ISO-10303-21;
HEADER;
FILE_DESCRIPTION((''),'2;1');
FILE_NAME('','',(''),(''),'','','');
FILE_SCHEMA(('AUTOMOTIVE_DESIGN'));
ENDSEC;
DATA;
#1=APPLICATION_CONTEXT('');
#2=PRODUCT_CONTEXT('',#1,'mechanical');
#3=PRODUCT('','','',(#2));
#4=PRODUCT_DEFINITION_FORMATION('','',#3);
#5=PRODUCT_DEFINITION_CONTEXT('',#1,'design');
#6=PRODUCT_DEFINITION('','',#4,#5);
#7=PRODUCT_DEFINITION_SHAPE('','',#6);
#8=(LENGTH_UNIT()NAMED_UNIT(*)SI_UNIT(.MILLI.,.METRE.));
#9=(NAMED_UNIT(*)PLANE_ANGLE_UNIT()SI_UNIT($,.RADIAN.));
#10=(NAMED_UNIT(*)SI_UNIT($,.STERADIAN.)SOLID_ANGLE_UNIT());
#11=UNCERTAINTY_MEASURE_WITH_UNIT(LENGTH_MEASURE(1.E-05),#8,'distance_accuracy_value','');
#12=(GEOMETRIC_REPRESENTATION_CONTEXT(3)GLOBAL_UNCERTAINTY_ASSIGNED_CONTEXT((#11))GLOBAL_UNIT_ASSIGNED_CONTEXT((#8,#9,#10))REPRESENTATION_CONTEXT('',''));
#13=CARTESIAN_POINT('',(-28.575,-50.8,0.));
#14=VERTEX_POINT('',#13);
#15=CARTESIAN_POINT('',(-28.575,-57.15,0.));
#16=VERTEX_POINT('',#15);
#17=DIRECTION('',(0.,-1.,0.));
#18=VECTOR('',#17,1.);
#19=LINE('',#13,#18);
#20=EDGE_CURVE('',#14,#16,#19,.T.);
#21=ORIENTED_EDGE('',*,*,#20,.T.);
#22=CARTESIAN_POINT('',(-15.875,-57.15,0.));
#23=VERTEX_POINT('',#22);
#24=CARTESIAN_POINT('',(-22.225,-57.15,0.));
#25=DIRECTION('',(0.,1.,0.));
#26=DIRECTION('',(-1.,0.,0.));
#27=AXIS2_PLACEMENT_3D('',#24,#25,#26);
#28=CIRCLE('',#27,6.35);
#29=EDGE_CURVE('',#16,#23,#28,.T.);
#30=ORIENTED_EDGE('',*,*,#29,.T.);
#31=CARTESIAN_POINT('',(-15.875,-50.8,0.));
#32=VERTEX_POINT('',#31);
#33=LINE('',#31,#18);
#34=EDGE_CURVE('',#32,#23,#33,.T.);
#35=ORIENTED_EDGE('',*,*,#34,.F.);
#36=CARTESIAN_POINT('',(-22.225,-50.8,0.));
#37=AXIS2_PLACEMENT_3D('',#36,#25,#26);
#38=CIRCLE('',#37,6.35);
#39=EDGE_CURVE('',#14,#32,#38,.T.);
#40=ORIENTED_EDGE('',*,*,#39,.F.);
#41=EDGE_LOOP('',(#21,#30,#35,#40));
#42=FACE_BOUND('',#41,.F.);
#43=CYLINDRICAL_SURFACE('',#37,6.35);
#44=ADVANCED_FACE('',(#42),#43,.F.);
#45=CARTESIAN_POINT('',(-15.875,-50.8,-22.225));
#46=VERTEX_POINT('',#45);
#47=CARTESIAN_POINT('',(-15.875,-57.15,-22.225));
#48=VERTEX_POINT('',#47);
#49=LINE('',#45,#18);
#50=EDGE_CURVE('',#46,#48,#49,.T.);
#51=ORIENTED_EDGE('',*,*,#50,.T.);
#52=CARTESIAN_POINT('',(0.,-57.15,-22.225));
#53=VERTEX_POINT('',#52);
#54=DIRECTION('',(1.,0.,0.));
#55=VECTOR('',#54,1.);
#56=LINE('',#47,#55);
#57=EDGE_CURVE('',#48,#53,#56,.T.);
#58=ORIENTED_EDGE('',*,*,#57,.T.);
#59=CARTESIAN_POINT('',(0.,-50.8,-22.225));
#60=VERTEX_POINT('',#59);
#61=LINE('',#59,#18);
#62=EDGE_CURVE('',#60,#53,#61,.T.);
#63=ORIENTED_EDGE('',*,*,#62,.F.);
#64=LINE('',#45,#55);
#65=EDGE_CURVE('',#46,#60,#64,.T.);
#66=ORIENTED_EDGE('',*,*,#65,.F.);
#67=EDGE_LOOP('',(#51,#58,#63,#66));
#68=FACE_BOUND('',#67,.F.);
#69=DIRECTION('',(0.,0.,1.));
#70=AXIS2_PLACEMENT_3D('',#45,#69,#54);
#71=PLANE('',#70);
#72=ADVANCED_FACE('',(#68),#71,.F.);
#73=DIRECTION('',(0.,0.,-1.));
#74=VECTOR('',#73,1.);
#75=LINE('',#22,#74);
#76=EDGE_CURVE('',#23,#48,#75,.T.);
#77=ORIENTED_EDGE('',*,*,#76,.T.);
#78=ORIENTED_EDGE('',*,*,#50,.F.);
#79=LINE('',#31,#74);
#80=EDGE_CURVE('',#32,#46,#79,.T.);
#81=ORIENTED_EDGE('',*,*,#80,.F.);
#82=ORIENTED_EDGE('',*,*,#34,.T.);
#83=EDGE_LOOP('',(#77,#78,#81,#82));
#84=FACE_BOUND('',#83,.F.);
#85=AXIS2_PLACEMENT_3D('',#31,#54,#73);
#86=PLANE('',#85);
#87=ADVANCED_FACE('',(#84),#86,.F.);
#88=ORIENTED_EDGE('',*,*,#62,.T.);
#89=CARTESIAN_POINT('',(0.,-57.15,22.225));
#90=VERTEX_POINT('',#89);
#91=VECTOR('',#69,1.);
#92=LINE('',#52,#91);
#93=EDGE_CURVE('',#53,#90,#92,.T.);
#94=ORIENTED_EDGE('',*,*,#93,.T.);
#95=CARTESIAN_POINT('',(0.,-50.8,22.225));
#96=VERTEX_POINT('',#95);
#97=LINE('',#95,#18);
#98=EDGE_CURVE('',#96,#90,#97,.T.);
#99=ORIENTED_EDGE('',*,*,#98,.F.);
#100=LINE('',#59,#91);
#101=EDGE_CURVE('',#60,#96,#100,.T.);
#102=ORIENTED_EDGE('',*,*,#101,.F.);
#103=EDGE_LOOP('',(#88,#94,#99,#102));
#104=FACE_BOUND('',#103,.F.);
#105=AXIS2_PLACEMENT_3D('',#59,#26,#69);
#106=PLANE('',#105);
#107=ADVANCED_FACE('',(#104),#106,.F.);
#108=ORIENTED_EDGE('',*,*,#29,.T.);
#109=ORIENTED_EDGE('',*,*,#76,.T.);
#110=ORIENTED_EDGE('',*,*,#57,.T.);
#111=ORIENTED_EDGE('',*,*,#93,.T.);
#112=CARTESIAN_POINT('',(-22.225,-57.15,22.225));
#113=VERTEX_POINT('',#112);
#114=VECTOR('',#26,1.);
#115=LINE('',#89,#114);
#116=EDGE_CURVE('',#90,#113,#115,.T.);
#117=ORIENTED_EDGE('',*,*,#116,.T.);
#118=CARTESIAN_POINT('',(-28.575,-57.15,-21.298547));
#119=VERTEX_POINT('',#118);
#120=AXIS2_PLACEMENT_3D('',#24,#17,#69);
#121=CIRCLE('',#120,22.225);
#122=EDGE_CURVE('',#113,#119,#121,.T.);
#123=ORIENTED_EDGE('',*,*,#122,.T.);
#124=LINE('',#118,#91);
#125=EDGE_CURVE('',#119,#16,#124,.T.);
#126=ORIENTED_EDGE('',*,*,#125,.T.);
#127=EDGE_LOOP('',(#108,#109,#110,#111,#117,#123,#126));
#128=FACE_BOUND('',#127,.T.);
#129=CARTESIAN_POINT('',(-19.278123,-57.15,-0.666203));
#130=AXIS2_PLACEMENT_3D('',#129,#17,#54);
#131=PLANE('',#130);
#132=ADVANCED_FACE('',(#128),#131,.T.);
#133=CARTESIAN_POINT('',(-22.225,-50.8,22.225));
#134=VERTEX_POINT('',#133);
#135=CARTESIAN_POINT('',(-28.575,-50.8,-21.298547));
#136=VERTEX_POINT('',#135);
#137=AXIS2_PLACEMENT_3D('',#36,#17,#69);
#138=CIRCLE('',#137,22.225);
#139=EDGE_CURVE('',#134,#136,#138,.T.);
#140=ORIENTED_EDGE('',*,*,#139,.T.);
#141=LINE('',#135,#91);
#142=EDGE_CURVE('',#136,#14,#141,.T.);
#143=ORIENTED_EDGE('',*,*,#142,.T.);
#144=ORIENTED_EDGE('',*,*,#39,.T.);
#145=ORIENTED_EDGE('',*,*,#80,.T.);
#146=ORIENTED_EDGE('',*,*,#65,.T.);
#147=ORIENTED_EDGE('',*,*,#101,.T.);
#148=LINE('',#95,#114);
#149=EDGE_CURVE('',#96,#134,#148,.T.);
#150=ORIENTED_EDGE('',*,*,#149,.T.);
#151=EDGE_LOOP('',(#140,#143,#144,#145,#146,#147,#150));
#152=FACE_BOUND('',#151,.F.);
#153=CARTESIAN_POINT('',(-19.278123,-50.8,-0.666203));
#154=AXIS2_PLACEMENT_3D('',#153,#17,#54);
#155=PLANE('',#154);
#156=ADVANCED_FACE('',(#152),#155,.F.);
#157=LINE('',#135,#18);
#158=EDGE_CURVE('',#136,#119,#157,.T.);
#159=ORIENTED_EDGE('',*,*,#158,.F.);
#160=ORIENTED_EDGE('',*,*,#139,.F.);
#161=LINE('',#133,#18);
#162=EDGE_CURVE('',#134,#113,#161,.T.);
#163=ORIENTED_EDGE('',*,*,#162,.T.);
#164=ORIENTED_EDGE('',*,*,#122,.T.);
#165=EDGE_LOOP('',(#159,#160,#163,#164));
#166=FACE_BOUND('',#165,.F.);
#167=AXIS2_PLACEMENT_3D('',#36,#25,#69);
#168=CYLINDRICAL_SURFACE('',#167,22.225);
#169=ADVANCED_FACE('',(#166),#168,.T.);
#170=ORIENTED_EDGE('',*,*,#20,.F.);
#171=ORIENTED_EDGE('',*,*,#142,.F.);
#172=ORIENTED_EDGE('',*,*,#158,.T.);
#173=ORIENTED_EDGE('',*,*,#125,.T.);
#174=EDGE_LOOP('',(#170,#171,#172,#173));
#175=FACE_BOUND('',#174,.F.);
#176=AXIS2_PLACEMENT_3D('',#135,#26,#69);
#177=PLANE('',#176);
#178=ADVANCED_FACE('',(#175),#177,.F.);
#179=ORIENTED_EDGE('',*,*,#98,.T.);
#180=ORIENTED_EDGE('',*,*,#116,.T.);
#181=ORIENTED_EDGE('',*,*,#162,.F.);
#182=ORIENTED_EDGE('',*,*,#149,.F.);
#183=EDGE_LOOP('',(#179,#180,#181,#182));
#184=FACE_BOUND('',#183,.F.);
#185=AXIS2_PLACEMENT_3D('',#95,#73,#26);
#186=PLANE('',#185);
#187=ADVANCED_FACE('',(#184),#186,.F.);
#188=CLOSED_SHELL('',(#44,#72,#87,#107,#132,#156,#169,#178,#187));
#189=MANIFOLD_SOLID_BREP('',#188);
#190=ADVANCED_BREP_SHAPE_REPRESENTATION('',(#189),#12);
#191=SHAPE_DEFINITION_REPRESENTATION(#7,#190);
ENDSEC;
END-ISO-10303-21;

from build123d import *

# Parameters (mm, degrees)
F2_DEPTH = 6.35


# Not quite as in the source:
# - a feature of the source that left no trace in its solid (it failed there, or was rolled back) is left out
# - a feature names something its author has since deleted; it is built from what else it names


with BuildPart() as f2:
    # F0 (on Front) → F2 (new body)
    with BuildSketch(Plane.XZ):
        with BuildLine():
            Line((6.35, -22.225), (22.225, -22.225))
            Line((22.225, -22.225), (22.225, 22.225))
            Line((22.225, 22.225), (0, 22.225))
            ThreePointArc((0, 22.225), (-15.7154482119, 15.7154482119), (-22.225, 0))
            ThreePointArc((-22.225, 0), (-17.8196433045, -13.2819779212), (-6.35, -21.2985474857))
            Line((-6.35, -21.2985474857), (-6.35, 0))
            ThreePointArc((-6.35, 0), (0, 6.35), (6.35, 0))
            Line((6.35, 0), (6.35, -22.225))
        make_face()
    extrude(amount=F2_DEPTH)


with BuildPart() as f2_1:
    # F3: moved
    add(f2.part.moved(Location((-22.225, -50.8, 0))))


solid = f2_1.part
